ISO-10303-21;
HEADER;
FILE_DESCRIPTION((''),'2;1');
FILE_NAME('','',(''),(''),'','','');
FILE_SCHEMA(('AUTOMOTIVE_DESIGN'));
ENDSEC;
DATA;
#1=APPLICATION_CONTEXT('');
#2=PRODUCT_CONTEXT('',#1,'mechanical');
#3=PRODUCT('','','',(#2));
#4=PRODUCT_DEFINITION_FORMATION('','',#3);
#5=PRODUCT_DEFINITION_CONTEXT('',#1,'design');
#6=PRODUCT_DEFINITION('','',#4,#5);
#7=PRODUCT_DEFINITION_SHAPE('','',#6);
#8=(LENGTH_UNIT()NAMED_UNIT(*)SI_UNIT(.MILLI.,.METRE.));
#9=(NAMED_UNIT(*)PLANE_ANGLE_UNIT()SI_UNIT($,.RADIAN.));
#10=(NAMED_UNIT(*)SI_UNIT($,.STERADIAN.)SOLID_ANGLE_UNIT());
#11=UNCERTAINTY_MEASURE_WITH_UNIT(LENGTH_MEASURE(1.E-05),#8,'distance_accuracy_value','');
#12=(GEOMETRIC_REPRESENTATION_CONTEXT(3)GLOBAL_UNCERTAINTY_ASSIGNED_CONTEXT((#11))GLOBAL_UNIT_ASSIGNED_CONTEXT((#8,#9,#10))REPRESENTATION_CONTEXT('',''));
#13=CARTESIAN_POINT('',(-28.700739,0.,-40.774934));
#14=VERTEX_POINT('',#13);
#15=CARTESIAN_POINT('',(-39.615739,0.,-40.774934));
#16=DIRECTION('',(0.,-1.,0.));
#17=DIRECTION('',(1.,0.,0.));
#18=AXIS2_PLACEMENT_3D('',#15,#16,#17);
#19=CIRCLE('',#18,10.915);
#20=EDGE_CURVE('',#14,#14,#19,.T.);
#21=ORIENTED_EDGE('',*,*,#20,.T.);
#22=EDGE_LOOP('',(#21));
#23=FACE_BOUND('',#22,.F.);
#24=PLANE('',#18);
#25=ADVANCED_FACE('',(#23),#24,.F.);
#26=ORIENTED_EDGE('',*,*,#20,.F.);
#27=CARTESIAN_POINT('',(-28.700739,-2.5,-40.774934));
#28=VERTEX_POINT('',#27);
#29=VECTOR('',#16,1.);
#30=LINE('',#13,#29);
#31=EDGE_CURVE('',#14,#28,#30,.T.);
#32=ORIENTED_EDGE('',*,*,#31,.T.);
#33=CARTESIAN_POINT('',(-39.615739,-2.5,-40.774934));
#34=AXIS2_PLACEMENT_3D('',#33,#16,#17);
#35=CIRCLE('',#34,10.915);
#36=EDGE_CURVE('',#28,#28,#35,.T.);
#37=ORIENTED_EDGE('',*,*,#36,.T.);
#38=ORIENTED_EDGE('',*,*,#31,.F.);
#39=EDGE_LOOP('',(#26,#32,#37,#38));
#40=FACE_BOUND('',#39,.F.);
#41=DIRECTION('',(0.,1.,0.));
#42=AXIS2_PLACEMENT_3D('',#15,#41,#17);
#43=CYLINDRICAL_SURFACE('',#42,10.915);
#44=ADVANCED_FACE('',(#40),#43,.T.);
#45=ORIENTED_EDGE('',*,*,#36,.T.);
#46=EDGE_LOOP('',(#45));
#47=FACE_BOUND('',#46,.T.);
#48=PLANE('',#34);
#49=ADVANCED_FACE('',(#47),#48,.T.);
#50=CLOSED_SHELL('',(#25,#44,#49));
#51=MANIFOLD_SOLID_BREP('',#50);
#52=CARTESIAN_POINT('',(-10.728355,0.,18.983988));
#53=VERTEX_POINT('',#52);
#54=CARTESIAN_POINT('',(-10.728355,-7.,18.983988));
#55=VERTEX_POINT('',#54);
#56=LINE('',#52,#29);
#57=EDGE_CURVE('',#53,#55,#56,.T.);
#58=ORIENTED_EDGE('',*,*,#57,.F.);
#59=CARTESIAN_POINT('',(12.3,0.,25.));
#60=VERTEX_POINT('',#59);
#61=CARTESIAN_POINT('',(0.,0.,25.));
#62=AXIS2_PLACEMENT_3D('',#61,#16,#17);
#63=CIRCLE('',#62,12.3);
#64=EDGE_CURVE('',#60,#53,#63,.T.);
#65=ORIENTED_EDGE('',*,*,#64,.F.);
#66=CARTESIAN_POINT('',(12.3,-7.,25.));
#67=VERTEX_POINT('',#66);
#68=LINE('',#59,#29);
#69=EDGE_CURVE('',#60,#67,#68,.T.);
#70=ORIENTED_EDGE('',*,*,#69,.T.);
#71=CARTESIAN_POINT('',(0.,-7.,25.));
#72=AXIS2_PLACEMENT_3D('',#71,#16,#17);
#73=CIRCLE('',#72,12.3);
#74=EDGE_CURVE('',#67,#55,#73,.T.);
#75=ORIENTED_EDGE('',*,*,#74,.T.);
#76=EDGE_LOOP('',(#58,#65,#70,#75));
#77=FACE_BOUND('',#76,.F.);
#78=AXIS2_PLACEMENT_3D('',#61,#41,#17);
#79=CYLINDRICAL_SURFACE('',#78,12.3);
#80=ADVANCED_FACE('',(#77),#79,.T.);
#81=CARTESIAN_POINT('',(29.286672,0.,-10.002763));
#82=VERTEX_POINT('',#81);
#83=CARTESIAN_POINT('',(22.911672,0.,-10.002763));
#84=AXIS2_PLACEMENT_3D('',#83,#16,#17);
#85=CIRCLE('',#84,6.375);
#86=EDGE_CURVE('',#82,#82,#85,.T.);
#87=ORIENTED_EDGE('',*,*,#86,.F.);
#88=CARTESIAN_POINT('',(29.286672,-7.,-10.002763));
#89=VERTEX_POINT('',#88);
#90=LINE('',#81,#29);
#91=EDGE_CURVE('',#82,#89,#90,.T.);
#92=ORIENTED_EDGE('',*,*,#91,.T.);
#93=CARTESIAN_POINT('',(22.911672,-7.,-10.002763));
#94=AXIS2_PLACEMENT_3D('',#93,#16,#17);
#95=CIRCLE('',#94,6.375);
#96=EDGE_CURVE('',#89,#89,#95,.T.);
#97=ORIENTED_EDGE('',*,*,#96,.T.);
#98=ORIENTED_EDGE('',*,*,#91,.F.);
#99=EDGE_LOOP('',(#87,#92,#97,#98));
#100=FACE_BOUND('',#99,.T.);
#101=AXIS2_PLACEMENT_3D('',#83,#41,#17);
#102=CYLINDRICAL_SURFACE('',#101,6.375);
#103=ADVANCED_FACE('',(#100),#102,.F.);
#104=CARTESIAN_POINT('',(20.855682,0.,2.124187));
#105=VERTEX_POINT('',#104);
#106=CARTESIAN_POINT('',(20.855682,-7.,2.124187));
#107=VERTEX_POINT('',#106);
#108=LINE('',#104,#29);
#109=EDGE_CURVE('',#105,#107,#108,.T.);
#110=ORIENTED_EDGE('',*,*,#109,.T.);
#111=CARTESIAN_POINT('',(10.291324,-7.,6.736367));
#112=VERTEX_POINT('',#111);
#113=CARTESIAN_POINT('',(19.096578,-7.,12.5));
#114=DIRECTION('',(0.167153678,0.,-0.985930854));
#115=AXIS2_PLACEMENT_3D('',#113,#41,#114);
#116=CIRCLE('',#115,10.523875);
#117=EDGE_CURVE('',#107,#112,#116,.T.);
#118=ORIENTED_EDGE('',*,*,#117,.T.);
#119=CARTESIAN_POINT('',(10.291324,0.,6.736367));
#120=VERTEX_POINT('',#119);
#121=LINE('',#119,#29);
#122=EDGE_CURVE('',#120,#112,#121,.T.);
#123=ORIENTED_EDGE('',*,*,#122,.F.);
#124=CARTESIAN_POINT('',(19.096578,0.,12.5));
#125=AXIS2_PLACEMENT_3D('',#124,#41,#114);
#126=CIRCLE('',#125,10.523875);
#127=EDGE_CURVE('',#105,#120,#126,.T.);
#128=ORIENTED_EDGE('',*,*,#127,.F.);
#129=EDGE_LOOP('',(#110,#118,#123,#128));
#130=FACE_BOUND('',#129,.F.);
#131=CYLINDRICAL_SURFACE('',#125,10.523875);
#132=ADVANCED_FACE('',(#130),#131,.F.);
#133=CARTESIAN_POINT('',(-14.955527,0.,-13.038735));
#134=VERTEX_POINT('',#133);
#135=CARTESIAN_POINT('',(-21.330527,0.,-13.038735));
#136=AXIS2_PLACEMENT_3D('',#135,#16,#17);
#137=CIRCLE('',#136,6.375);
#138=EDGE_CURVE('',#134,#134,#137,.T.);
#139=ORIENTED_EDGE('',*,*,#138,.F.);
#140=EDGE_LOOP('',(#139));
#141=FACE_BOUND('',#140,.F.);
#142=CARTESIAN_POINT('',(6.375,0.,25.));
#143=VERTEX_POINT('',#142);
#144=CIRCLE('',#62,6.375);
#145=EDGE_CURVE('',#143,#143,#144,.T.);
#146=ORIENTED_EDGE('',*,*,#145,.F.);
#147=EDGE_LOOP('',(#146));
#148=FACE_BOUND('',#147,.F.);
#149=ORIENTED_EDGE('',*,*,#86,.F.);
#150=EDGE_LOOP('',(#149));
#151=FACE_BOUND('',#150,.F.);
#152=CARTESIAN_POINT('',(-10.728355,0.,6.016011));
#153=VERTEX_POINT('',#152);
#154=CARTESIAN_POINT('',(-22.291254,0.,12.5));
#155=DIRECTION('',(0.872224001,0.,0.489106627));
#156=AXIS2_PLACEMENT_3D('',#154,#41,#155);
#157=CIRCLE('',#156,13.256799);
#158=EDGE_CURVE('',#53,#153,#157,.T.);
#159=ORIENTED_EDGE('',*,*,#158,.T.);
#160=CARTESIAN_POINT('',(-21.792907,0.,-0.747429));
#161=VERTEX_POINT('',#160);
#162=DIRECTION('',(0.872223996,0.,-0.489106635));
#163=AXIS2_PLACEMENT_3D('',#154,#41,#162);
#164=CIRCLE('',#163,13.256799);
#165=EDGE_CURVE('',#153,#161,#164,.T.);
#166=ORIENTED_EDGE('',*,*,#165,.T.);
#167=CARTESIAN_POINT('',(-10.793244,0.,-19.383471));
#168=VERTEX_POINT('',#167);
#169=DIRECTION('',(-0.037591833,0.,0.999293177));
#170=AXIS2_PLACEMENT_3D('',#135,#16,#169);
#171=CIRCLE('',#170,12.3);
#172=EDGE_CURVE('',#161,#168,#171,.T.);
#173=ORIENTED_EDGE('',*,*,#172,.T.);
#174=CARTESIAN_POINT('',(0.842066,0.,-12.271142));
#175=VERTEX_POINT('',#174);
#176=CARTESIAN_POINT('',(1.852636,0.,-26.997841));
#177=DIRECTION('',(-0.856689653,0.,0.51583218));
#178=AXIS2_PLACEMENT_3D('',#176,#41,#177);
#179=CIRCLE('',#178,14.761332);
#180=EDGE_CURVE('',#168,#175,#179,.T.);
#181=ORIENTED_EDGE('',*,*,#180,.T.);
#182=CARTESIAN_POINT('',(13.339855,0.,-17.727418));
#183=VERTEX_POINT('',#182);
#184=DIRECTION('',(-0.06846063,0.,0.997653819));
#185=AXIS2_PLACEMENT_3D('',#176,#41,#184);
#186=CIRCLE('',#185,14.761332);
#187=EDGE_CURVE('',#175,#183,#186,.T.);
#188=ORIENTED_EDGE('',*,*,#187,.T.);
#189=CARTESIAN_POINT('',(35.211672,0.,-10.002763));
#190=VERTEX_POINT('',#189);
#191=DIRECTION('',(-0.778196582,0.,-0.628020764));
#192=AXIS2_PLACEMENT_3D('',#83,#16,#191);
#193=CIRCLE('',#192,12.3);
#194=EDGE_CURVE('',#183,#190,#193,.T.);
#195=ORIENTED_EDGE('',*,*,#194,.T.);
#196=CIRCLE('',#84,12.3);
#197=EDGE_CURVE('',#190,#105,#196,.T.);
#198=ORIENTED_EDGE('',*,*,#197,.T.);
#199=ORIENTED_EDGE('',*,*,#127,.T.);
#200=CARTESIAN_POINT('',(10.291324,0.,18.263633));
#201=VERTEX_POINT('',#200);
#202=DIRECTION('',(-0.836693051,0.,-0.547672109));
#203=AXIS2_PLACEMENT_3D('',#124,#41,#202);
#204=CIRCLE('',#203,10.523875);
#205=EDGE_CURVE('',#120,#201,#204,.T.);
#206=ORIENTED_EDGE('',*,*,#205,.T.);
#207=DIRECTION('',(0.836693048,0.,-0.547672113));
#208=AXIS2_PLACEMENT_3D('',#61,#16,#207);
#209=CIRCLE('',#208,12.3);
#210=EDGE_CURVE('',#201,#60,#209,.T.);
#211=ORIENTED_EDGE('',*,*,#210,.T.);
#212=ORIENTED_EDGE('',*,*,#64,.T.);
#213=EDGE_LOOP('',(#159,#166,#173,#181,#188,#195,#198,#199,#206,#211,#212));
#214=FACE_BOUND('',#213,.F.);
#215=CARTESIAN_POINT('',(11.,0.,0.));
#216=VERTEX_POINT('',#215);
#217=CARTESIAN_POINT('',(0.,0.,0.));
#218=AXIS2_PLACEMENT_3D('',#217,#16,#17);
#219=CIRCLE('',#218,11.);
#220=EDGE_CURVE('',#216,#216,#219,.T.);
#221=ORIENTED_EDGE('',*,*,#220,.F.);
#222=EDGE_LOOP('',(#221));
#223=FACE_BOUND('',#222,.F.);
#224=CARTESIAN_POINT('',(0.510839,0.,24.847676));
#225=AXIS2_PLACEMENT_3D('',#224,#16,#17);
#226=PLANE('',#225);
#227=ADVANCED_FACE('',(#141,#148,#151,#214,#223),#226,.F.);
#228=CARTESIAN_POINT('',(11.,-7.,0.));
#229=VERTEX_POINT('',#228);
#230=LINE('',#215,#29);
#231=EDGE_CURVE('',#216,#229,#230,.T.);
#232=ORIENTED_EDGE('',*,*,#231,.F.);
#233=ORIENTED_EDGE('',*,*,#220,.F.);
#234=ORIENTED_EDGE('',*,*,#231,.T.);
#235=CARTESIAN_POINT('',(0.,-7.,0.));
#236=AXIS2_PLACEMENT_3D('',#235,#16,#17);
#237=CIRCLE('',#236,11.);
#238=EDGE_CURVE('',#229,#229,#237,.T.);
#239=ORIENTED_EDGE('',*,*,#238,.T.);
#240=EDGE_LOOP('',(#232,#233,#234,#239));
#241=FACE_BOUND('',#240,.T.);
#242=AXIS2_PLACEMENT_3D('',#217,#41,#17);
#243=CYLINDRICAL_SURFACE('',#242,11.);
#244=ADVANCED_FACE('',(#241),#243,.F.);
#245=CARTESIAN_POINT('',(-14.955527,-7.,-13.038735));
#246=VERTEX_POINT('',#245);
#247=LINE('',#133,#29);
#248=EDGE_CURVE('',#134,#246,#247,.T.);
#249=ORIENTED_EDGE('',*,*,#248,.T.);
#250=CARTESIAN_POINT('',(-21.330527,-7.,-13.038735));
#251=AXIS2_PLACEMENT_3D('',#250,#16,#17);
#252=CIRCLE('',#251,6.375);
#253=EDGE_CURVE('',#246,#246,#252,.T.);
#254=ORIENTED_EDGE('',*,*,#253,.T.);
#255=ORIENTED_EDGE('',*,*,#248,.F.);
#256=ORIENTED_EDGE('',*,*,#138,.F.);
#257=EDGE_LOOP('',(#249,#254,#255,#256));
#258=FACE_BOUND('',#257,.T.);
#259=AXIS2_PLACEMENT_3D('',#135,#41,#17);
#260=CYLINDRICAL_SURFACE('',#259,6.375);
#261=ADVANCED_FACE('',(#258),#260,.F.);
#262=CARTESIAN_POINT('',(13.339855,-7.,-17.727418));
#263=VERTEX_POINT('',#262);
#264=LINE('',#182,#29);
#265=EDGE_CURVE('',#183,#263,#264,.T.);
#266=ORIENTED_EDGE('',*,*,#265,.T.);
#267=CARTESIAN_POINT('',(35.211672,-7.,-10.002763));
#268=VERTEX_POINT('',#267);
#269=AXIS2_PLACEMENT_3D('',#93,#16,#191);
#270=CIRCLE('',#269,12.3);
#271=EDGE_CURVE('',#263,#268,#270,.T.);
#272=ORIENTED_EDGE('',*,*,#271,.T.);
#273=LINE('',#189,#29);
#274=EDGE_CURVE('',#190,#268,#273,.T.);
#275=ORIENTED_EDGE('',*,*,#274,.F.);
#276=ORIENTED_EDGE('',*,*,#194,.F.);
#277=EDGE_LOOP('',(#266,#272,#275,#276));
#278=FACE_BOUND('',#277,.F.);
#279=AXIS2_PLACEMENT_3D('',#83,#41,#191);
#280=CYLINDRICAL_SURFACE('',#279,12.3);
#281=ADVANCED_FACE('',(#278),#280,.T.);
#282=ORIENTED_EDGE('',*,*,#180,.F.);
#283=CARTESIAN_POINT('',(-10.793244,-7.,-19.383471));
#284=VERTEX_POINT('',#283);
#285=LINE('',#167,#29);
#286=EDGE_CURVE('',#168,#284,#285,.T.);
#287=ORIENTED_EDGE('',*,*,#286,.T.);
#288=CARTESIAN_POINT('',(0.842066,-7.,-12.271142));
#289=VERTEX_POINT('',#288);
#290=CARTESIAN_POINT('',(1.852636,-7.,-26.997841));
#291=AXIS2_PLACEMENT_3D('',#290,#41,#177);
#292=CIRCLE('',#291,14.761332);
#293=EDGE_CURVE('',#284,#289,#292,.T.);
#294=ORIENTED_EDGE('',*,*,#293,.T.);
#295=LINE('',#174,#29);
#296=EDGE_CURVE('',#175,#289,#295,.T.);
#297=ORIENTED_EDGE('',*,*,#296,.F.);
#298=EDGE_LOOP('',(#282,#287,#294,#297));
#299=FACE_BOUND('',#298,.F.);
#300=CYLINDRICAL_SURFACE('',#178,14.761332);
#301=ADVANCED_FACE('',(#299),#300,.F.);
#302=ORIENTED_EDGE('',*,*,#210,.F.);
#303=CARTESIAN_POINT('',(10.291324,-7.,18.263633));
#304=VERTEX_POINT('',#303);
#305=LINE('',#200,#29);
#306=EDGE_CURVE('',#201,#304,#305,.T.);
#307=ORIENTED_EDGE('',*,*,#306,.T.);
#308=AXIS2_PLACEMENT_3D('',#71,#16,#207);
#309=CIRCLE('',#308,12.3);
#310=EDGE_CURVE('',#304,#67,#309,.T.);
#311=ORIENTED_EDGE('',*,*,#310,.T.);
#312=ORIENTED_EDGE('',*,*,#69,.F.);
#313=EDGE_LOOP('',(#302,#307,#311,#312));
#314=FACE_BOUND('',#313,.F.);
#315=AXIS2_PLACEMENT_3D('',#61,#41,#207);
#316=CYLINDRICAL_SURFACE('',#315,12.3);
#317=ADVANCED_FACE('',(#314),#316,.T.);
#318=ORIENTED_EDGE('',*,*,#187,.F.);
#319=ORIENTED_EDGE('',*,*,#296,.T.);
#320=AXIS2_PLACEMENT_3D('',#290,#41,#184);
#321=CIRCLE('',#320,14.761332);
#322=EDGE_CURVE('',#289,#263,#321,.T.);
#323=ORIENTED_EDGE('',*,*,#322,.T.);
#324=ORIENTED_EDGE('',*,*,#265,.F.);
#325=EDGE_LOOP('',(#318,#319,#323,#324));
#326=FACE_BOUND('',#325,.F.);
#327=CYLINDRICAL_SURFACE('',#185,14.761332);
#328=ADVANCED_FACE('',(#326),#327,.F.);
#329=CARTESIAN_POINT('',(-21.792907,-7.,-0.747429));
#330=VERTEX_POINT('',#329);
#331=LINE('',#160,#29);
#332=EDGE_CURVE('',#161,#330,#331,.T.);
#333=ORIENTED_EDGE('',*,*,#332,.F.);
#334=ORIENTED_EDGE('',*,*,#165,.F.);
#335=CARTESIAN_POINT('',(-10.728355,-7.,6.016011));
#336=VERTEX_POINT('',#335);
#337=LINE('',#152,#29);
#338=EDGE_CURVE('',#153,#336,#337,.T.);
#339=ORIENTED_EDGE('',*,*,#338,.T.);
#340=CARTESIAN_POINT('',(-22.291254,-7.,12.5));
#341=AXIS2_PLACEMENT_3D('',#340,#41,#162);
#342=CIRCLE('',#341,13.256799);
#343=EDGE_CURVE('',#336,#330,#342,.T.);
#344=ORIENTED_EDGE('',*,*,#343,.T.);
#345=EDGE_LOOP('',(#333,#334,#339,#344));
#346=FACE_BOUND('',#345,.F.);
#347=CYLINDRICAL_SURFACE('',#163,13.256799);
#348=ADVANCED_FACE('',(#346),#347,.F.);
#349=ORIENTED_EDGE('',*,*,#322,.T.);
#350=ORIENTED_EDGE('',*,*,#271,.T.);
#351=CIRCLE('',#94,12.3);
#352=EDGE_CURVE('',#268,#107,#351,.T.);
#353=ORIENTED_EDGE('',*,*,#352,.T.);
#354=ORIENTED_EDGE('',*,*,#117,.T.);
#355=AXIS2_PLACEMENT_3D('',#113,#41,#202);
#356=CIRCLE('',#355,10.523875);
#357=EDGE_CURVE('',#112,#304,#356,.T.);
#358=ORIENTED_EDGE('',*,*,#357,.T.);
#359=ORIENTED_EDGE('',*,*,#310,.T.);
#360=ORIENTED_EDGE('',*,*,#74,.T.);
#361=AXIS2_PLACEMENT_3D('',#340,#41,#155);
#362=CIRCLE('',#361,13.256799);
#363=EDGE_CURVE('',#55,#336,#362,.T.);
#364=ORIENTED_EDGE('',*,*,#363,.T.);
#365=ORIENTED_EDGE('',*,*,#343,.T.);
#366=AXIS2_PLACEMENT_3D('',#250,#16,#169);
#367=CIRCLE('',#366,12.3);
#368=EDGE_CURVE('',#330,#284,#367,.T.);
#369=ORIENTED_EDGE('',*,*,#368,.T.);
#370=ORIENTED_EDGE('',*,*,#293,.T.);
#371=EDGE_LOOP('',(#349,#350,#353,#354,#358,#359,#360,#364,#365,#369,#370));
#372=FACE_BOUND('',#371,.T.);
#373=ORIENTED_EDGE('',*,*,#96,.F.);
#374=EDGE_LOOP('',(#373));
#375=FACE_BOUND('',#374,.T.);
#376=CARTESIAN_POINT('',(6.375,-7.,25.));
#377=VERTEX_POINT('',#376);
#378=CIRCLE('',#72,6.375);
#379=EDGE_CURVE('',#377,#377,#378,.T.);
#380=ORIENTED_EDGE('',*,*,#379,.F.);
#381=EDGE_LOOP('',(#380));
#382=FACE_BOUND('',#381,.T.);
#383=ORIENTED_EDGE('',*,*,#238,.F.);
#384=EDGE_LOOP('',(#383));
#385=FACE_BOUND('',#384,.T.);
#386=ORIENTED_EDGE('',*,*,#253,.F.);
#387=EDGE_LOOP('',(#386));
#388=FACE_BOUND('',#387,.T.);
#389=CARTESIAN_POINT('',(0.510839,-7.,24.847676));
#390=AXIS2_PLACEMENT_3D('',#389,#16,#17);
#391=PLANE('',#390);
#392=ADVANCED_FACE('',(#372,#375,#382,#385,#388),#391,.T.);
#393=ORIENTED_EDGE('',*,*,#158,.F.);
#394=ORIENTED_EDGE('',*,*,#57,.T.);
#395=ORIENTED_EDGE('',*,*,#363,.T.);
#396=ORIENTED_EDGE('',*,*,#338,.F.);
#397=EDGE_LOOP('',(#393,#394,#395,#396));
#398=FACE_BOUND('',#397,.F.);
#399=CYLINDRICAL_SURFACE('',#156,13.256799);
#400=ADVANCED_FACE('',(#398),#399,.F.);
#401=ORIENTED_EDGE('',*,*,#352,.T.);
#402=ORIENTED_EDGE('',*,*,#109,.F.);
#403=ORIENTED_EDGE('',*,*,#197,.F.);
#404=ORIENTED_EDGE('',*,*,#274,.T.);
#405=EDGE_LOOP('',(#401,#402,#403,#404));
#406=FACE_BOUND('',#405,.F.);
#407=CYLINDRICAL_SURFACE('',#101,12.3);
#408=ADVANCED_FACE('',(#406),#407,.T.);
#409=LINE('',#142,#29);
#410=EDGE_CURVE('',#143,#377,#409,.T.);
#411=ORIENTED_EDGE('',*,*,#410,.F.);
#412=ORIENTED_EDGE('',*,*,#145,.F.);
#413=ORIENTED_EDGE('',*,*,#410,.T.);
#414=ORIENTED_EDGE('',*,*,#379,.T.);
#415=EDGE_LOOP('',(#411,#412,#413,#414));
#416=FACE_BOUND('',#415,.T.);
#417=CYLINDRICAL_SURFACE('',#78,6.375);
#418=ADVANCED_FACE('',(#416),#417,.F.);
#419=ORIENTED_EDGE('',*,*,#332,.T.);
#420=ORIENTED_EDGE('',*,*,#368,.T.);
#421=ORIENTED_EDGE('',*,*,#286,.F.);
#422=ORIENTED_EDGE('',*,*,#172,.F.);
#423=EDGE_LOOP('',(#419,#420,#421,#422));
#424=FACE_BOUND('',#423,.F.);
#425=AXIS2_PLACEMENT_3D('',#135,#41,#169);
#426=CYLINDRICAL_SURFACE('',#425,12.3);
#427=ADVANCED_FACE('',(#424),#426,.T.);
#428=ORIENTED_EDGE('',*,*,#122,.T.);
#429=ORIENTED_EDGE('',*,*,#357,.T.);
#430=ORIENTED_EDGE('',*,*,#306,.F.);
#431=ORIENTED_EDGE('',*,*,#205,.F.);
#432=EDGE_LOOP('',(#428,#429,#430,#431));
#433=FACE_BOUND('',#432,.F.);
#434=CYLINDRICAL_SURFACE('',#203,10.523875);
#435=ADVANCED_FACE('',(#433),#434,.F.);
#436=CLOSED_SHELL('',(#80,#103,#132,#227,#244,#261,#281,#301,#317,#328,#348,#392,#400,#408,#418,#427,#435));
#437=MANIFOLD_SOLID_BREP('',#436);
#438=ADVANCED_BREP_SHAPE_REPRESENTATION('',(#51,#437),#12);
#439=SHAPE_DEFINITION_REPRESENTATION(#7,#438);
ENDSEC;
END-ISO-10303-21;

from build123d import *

# Parameters (mm, degrees)
F0_R     = 6.375
F0_R_2   = 11
F1_DEPTH = 7
F2_R     = 10.915
F2_R_2   = 4.5
F3_DEPTH = 2.5


# Not quite as in the source:
# - a feature names something its author has since deleted; it is built from what else it names
# - the program builds the solid bodies; features that only make, move or delete a surface that nothing else refers to are left out


with BuildPart() as f1:
    # F0 (on Front) → F1 (new body)
    with BuildSketch(Plane.XZ):
        with BuildLine():
            ThreePointArc((10.2913244925, 18.2636330126), (11.7871389925, 21.4852661024), (12.3, 25))
            ThreePointArc((12.3, 25), (-3.1089572961, 36.9006043767), (-10.7283552083, 18.983988487))
            ThreePointArc((-10.7283552083, 18.983988487), (-0.4212801491, 12.7072166278), (10.2913244925, 18.2636330126))
        make_face()
        with Locations((0, 25)):
            Circle(F0_R, mode=Mode.SUBTRACT)
        with BuildLine():
            ThreePointArc((10.2913244925, 18.2636330126), (-0.4212801491, 12.7072166278), (-10.7283552083, 18.983988487))
            ThreePointArc((-10.7283552083, 18.983988487), (-9.0344544049, 12.4999999397), (-10.7283552673, 6.0160114077))
            ThreePointArc((-10.7283552673, 6.0160114077), (-0.4212802335, 12.2927833693), (10.2913244661, 6.7363670278))
            ThreePointArc((10.2913244661, 6.7363670278), (8.5727024982, 12.5000000241), (10.2913244925, 18.2636330126))
        make_face()
        with BuildLine():
            ThreePointArc((10.2913244661, 6.7363670278), (-0.4212802335, 12.2927833693), (-10.7283552673, 6.0160114077))
            ThreePointArc((-10.7283552673, 6.0160114077), (-10.3942134043, -6.576498134), (0.8420661962, -12.2711419404))
            ThreePointArc((0.8420661962, -12.2711419404), (8.9902006155, -8.3944203429), (12.3, 0))
            ThreePointArc((12.3, 0), (11.7871389856, 3.5147339207), (10.2913244661, 6.7363670278))
        make_face()
        Circle(F0_R_2, mode=Mode.SUBTRACT)
        with BuildLine():
            ThreePointArc((0.8420661962, -12.2711419404), (-10.3942134043, -6.576498134), (-10.7283552673, 6.0160114077))
            ThreePointArc((-10.7283552673, 6.0160114077), (-15.3771779341, 1.1890192116), (-21.7929065021, -0.7474292877))
            ThreePointArc((-21.7929065021, -0.7474292877), (-12.7981553136, -4.1793542246), (-9.0305269511, -13.0387353677))
            ThreePointArc((-9.0305269511, -13.0387353677), (-9.4793966749, -16.3312588946), (-10.7932442154, -19.3834711816))
            ThreePointArc((-10.7932442154, -19.3834711816), (-5.8461277368, -14.4031615344), (0.8420661962, -12.2711419404))
        make_face()
        with BuildLine():
            ThreePointArc((20.8556822396, 2.1241866562), (14.8858646149, 2.8552166619), (10.2913244661, 6.7363670278))
            ThreePointArc((10.2913244661, 6.7363670278), (11.7871389856, 3.5147339207), (12.3, 0))
            ThreePointArc((12.3, 0), (8.9902006155, -8.3944203429), (0.8420661962, -12.2711419404))
            ThreePointArc((0.8420661962, -12.2711419404), (7.7588005924, -13.4695690785), (13.3398545128, -17.7274182361))
            ThreePointArc((13.3398545128, -17.7274182361), (11.4084974744, -5.6476549278), (20.8556822396, 2.1241866562))
        make_face()
        with BuildLine():
            ThreePointArc((-9.0305269511, -13.0387353677), (-12.7981553136, -4.1793542246), (-21.7929065021, -0.7474292877))
            ThreePointArc((-21.7929065021, -0.7474292877), (-31.9230447308, -19.2908203869), (-10.7932442154, -19.3834711816))
            ThreePointArc((-10.7932442154, -19.3834711816), (-9.4793966749, -16.3312588946), (-9.0305269511, -13.0387353677))
        make_face()
        with Locations((-21.3305269511, -13.0387353677)):
            Circle(F0_R, mode=Mode.SUBTRACT)
        with BuildLine():
            ThreePointArc((35.2116724729, -10.0027628432), (30.8489679862, -0.606522109), (20.8556822396, 2.1241866562))
            ThreePointArc((20.8556822396, 2.1241866562), (11.4084974744, -5.6476549278), (13.3398545128, -17.7274182361))
            ThreePointArc((13.3398545128, -17.7274182361), (27.0078071808, -21.6006799171), (35.2116724729, -10.0027628432))
        make_face()
        with Locations((22.9116724729, -10.0027628432)):
            Circle(F0_R, mode=Mode.SUBTRACT)
    extrude(amount=F1_DEPTH)


with BuildPart() as f3:
    # F2 (on Front) → F3 (new body)
    with BuildSketch(Plane.XZ):
        with Locations((-39.6157391369, -40.7749339938)):
            Circle(F2_R)
        with Locations((-39.6157391369, -40.7749339938)):
            Circle(F2_R_2, mode=Mode.SUBTRACT)
        with Locations((-39.6157391369, -40.7749339938)):
            Circle(F2_R_2)
    extrude(amount=F3_DEPTH)


solid = Compound([f1.part, f3.part])
